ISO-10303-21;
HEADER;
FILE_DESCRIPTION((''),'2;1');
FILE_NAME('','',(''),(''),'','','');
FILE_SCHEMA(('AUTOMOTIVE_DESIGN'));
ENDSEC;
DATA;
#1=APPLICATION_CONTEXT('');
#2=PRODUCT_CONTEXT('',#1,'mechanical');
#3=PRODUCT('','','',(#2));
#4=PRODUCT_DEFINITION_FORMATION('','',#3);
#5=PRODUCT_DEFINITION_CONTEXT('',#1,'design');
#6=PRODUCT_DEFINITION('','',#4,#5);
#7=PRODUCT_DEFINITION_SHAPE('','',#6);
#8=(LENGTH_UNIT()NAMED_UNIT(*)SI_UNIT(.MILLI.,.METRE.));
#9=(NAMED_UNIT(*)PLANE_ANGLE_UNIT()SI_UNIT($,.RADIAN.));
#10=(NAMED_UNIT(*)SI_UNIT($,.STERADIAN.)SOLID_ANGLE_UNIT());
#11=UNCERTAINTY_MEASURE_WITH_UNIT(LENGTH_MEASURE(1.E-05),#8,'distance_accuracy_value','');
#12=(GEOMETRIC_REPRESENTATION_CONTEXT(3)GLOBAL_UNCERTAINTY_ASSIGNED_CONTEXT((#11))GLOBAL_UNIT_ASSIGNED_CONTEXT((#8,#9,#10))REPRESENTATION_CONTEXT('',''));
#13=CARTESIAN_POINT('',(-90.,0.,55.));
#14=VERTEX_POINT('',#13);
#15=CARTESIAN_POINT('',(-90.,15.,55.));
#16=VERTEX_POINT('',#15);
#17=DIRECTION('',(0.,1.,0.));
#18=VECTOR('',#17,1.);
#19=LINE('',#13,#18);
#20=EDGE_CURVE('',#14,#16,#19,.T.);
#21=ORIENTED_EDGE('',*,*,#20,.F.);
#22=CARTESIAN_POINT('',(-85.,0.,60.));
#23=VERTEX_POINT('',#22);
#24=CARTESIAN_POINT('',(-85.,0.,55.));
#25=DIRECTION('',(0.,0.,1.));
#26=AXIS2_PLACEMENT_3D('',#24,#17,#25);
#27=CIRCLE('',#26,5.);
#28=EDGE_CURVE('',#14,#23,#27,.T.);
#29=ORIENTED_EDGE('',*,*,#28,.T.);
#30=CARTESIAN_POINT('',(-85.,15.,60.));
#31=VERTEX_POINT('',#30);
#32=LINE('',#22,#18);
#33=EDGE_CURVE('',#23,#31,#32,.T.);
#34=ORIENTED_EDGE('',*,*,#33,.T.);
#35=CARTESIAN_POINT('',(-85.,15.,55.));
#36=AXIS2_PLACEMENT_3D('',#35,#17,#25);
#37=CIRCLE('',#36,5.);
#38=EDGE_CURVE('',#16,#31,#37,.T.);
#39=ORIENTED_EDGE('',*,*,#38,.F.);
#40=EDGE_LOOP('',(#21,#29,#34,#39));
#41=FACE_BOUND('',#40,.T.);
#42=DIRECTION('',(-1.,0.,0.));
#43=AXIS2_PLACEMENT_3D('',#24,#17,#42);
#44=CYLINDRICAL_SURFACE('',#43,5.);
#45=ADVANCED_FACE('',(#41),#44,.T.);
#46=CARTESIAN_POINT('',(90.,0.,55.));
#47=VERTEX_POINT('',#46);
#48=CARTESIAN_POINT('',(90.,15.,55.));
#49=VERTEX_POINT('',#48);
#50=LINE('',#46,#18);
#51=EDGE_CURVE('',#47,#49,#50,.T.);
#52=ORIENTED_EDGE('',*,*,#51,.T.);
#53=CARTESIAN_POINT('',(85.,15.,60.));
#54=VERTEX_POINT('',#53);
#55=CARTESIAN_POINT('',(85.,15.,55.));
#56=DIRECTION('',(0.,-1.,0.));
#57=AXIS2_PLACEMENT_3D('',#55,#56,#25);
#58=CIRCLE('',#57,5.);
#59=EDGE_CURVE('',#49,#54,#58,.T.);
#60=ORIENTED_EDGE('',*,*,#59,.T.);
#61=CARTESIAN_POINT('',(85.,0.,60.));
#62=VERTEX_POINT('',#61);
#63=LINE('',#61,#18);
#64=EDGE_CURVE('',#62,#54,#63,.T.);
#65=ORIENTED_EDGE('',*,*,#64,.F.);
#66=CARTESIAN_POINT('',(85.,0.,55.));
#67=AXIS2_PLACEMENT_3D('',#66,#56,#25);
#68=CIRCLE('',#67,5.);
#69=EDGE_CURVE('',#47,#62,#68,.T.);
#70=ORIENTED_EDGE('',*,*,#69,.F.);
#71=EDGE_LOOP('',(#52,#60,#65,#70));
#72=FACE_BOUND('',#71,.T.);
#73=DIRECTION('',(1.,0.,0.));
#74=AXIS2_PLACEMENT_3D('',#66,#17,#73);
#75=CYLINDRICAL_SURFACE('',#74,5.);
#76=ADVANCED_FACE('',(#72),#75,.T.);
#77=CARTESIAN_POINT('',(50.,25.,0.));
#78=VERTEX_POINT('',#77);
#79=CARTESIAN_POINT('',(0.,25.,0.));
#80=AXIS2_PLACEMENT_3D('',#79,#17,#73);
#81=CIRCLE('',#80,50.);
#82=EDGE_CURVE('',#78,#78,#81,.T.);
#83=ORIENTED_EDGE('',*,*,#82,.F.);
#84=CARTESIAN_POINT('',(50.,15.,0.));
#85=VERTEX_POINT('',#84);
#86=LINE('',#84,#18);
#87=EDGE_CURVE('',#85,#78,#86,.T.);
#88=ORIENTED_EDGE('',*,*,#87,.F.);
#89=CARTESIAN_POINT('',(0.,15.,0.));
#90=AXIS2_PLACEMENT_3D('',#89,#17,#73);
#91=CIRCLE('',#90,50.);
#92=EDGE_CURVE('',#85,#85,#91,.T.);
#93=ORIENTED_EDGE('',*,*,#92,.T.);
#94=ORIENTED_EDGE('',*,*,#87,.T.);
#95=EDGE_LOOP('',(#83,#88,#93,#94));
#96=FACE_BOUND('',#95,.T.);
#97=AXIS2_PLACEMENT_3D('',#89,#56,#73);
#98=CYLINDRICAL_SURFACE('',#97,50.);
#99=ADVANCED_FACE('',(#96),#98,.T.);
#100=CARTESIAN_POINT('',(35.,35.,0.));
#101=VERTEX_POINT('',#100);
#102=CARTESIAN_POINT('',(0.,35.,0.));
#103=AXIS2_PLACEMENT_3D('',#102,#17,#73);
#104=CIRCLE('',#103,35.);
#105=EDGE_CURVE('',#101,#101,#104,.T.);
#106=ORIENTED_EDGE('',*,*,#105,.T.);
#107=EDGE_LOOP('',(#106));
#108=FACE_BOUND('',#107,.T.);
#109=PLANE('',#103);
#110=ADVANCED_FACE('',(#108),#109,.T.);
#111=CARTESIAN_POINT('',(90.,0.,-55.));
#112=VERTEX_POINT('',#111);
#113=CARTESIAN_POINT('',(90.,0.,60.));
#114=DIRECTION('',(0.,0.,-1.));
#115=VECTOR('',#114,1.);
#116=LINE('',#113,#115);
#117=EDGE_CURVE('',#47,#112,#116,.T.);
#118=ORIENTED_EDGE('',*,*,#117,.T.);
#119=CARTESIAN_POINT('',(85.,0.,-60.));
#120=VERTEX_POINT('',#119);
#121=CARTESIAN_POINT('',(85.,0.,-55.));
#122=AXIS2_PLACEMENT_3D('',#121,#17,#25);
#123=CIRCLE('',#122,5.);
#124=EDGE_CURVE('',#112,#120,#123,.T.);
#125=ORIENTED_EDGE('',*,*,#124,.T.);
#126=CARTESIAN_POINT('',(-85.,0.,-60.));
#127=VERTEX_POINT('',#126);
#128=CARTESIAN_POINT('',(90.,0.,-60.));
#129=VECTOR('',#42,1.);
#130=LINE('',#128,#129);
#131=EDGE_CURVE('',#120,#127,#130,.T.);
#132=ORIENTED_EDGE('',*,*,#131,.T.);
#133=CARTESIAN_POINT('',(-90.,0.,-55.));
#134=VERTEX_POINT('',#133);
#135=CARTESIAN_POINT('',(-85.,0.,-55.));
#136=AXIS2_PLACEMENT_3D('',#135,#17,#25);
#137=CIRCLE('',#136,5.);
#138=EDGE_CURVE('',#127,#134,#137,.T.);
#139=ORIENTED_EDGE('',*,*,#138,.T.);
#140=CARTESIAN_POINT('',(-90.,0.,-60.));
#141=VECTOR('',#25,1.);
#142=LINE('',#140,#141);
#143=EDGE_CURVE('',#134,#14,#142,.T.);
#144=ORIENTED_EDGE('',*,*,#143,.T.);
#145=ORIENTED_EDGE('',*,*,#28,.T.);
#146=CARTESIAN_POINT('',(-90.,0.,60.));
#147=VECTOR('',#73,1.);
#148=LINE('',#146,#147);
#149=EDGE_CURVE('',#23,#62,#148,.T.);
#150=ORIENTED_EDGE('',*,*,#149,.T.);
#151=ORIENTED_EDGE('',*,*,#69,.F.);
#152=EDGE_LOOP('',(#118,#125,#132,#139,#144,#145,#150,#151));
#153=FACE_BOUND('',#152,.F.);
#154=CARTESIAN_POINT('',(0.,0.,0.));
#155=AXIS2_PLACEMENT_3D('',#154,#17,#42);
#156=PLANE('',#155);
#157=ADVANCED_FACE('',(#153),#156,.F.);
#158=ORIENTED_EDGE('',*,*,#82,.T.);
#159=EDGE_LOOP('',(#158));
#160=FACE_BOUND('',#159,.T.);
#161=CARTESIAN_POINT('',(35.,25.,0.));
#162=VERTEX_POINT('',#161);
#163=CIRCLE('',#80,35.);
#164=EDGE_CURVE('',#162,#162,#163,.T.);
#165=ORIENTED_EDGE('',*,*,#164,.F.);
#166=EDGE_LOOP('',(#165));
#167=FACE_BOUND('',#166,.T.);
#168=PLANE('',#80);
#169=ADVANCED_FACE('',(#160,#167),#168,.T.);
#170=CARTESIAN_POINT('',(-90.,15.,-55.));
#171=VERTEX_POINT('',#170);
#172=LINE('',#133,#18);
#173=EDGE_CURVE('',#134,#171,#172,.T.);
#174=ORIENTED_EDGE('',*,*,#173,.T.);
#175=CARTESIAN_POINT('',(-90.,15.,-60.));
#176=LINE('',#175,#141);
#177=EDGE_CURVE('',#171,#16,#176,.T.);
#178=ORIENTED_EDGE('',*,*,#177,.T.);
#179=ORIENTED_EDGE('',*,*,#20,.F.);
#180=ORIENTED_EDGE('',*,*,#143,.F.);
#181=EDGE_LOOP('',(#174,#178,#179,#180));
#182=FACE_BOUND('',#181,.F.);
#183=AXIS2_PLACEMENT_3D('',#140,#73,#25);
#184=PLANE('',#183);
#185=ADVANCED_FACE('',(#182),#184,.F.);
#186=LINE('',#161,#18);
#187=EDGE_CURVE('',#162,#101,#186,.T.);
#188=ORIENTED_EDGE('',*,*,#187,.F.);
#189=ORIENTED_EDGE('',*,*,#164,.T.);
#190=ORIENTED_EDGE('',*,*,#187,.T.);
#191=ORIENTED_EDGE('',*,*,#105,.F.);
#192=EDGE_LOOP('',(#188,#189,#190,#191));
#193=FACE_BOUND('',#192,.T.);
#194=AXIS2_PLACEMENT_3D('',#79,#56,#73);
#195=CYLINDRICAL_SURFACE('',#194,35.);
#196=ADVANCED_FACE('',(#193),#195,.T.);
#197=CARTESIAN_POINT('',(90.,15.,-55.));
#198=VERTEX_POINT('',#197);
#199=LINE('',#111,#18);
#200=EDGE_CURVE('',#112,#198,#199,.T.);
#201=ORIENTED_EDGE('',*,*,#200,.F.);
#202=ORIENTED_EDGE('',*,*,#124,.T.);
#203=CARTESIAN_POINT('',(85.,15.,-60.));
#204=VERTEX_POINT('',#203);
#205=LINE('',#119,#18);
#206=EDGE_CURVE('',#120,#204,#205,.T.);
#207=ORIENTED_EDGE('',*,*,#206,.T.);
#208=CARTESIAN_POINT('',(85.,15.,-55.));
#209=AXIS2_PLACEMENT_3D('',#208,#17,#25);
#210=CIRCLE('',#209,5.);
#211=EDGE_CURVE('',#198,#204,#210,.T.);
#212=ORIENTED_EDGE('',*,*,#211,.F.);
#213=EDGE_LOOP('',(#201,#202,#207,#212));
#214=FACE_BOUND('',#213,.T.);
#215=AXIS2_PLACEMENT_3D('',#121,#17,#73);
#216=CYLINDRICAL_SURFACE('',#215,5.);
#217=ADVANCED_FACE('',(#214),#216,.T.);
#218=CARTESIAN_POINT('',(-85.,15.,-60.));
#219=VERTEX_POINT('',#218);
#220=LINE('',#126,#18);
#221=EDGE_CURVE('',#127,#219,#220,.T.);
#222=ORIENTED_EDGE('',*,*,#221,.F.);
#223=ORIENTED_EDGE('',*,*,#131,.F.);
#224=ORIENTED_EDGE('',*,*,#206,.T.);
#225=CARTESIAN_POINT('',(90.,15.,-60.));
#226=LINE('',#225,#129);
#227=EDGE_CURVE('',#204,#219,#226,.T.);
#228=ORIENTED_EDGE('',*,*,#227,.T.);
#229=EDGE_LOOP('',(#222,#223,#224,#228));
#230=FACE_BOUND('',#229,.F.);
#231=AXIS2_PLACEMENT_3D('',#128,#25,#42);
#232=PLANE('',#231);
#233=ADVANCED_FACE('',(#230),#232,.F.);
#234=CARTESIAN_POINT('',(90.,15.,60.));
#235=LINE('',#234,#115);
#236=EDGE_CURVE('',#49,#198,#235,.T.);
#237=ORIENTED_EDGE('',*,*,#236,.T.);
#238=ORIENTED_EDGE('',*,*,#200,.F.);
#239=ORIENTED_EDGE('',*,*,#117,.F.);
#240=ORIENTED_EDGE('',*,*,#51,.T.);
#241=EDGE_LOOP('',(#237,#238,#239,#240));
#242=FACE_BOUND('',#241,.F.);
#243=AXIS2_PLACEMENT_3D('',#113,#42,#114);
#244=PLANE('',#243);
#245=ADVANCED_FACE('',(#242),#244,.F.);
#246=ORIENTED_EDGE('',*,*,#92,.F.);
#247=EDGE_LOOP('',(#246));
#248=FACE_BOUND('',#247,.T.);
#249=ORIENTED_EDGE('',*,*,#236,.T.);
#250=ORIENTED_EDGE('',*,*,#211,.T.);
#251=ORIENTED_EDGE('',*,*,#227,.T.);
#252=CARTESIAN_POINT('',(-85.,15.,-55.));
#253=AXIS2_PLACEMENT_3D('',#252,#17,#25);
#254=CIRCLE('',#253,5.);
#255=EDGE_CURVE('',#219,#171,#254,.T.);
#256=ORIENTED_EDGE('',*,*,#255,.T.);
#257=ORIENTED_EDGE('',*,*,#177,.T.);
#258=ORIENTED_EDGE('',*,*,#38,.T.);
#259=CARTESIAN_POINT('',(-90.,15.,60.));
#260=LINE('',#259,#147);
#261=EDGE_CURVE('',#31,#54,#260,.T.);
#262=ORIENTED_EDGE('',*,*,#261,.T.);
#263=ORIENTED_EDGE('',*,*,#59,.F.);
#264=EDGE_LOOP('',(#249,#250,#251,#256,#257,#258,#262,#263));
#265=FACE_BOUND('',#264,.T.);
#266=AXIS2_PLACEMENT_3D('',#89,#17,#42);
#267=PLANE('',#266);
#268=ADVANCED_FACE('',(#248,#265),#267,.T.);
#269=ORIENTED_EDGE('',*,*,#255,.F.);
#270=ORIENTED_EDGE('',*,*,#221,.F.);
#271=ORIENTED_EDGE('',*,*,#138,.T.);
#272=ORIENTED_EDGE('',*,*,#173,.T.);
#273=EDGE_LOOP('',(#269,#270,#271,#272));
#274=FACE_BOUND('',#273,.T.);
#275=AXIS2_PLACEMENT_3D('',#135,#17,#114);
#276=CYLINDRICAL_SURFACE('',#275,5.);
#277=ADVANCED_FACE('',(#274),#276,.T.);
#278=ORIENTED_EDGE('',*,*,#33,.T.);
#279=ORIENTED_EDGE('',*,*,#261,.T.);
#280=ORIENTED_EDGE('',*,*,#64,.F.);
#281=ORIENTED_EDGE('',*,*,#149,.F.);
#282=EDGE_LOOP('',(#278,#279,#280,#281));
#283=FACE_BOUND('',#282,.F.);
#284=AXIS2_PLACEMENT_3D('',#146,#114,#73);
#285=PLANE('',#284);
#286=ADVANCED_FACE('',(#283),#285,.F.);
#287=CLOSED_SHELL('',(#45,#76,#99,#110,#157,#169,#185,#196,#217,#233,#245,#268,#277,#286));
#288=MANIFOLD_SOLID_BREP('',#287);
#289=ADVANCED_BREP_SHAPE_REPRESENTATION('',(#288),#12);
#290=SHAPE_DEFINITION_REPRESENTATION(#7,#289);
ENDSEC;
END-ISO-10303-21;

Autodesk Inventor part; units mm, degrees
ref_plane "YZ Plane" through (0, 0, 0) normal (1, 0, 0) x (0, 1, 0)
ref_plane "XZ Plane" through (0, 0, 0) normal (0, 1, 0) x (-1, 0, 0)
ref_plane "XY Plane" through (0, 0, 0) normal (0, 0, 1) x (1, 0, 0)
sketch "Sketch1" plane through (0, 0, 0) normal (0, 1, 0) x (-1, 0, 0)
  line L0 (90, 60) -> (-90, 60)
  line L1 (-90, 60) -> (-90, -60)
  line L2 (-90, -60) -> (90, -60)
  line L3 (90, -60) -> (90, 60)
  line L4 (90, 60) -> (-90, -60) construction
  line L5 (-90, 60) -> (90, -60) construction
  point P0 (0, 0)
  dimension "d0" = 180
  dimension "d1" = 120
extrude "Extrusion1" add sketch "Sketch1" along normal blind 15
fillet "Face Fillet1" radius 5 1 edges at (90, 7.5, 60)
fillet "Face Fillet2" radius 5 1 edges at (90, 7.5, -60)
fillet "Face Fillet3" radius 5 1 edges at (-90, 7.5, -60)
fillet "Face Fillet4" radius 5 1 edges at (-90, 7.5, 60)
sketch "Sketch2" plane through (0, 15, 0) normal (0, 1, 0) x (1, 0, 0)
  circle A0 centre (0, 0) radius 50
  dimension "d8" = 100
extrude "Extrusion2" add sketch "Sketch2" along normal blind 10
sketch "Sketch3" plane through (0, 25, 0) normal (0, 1, 0) x (1, 0, 0)
  circle A0 centre (0, 0) radius 35
  dimension "d11" = 70
extrude "Extrusion3" add sketch "Sketch3" along normal blind 10
properties part number "base_of weel"
